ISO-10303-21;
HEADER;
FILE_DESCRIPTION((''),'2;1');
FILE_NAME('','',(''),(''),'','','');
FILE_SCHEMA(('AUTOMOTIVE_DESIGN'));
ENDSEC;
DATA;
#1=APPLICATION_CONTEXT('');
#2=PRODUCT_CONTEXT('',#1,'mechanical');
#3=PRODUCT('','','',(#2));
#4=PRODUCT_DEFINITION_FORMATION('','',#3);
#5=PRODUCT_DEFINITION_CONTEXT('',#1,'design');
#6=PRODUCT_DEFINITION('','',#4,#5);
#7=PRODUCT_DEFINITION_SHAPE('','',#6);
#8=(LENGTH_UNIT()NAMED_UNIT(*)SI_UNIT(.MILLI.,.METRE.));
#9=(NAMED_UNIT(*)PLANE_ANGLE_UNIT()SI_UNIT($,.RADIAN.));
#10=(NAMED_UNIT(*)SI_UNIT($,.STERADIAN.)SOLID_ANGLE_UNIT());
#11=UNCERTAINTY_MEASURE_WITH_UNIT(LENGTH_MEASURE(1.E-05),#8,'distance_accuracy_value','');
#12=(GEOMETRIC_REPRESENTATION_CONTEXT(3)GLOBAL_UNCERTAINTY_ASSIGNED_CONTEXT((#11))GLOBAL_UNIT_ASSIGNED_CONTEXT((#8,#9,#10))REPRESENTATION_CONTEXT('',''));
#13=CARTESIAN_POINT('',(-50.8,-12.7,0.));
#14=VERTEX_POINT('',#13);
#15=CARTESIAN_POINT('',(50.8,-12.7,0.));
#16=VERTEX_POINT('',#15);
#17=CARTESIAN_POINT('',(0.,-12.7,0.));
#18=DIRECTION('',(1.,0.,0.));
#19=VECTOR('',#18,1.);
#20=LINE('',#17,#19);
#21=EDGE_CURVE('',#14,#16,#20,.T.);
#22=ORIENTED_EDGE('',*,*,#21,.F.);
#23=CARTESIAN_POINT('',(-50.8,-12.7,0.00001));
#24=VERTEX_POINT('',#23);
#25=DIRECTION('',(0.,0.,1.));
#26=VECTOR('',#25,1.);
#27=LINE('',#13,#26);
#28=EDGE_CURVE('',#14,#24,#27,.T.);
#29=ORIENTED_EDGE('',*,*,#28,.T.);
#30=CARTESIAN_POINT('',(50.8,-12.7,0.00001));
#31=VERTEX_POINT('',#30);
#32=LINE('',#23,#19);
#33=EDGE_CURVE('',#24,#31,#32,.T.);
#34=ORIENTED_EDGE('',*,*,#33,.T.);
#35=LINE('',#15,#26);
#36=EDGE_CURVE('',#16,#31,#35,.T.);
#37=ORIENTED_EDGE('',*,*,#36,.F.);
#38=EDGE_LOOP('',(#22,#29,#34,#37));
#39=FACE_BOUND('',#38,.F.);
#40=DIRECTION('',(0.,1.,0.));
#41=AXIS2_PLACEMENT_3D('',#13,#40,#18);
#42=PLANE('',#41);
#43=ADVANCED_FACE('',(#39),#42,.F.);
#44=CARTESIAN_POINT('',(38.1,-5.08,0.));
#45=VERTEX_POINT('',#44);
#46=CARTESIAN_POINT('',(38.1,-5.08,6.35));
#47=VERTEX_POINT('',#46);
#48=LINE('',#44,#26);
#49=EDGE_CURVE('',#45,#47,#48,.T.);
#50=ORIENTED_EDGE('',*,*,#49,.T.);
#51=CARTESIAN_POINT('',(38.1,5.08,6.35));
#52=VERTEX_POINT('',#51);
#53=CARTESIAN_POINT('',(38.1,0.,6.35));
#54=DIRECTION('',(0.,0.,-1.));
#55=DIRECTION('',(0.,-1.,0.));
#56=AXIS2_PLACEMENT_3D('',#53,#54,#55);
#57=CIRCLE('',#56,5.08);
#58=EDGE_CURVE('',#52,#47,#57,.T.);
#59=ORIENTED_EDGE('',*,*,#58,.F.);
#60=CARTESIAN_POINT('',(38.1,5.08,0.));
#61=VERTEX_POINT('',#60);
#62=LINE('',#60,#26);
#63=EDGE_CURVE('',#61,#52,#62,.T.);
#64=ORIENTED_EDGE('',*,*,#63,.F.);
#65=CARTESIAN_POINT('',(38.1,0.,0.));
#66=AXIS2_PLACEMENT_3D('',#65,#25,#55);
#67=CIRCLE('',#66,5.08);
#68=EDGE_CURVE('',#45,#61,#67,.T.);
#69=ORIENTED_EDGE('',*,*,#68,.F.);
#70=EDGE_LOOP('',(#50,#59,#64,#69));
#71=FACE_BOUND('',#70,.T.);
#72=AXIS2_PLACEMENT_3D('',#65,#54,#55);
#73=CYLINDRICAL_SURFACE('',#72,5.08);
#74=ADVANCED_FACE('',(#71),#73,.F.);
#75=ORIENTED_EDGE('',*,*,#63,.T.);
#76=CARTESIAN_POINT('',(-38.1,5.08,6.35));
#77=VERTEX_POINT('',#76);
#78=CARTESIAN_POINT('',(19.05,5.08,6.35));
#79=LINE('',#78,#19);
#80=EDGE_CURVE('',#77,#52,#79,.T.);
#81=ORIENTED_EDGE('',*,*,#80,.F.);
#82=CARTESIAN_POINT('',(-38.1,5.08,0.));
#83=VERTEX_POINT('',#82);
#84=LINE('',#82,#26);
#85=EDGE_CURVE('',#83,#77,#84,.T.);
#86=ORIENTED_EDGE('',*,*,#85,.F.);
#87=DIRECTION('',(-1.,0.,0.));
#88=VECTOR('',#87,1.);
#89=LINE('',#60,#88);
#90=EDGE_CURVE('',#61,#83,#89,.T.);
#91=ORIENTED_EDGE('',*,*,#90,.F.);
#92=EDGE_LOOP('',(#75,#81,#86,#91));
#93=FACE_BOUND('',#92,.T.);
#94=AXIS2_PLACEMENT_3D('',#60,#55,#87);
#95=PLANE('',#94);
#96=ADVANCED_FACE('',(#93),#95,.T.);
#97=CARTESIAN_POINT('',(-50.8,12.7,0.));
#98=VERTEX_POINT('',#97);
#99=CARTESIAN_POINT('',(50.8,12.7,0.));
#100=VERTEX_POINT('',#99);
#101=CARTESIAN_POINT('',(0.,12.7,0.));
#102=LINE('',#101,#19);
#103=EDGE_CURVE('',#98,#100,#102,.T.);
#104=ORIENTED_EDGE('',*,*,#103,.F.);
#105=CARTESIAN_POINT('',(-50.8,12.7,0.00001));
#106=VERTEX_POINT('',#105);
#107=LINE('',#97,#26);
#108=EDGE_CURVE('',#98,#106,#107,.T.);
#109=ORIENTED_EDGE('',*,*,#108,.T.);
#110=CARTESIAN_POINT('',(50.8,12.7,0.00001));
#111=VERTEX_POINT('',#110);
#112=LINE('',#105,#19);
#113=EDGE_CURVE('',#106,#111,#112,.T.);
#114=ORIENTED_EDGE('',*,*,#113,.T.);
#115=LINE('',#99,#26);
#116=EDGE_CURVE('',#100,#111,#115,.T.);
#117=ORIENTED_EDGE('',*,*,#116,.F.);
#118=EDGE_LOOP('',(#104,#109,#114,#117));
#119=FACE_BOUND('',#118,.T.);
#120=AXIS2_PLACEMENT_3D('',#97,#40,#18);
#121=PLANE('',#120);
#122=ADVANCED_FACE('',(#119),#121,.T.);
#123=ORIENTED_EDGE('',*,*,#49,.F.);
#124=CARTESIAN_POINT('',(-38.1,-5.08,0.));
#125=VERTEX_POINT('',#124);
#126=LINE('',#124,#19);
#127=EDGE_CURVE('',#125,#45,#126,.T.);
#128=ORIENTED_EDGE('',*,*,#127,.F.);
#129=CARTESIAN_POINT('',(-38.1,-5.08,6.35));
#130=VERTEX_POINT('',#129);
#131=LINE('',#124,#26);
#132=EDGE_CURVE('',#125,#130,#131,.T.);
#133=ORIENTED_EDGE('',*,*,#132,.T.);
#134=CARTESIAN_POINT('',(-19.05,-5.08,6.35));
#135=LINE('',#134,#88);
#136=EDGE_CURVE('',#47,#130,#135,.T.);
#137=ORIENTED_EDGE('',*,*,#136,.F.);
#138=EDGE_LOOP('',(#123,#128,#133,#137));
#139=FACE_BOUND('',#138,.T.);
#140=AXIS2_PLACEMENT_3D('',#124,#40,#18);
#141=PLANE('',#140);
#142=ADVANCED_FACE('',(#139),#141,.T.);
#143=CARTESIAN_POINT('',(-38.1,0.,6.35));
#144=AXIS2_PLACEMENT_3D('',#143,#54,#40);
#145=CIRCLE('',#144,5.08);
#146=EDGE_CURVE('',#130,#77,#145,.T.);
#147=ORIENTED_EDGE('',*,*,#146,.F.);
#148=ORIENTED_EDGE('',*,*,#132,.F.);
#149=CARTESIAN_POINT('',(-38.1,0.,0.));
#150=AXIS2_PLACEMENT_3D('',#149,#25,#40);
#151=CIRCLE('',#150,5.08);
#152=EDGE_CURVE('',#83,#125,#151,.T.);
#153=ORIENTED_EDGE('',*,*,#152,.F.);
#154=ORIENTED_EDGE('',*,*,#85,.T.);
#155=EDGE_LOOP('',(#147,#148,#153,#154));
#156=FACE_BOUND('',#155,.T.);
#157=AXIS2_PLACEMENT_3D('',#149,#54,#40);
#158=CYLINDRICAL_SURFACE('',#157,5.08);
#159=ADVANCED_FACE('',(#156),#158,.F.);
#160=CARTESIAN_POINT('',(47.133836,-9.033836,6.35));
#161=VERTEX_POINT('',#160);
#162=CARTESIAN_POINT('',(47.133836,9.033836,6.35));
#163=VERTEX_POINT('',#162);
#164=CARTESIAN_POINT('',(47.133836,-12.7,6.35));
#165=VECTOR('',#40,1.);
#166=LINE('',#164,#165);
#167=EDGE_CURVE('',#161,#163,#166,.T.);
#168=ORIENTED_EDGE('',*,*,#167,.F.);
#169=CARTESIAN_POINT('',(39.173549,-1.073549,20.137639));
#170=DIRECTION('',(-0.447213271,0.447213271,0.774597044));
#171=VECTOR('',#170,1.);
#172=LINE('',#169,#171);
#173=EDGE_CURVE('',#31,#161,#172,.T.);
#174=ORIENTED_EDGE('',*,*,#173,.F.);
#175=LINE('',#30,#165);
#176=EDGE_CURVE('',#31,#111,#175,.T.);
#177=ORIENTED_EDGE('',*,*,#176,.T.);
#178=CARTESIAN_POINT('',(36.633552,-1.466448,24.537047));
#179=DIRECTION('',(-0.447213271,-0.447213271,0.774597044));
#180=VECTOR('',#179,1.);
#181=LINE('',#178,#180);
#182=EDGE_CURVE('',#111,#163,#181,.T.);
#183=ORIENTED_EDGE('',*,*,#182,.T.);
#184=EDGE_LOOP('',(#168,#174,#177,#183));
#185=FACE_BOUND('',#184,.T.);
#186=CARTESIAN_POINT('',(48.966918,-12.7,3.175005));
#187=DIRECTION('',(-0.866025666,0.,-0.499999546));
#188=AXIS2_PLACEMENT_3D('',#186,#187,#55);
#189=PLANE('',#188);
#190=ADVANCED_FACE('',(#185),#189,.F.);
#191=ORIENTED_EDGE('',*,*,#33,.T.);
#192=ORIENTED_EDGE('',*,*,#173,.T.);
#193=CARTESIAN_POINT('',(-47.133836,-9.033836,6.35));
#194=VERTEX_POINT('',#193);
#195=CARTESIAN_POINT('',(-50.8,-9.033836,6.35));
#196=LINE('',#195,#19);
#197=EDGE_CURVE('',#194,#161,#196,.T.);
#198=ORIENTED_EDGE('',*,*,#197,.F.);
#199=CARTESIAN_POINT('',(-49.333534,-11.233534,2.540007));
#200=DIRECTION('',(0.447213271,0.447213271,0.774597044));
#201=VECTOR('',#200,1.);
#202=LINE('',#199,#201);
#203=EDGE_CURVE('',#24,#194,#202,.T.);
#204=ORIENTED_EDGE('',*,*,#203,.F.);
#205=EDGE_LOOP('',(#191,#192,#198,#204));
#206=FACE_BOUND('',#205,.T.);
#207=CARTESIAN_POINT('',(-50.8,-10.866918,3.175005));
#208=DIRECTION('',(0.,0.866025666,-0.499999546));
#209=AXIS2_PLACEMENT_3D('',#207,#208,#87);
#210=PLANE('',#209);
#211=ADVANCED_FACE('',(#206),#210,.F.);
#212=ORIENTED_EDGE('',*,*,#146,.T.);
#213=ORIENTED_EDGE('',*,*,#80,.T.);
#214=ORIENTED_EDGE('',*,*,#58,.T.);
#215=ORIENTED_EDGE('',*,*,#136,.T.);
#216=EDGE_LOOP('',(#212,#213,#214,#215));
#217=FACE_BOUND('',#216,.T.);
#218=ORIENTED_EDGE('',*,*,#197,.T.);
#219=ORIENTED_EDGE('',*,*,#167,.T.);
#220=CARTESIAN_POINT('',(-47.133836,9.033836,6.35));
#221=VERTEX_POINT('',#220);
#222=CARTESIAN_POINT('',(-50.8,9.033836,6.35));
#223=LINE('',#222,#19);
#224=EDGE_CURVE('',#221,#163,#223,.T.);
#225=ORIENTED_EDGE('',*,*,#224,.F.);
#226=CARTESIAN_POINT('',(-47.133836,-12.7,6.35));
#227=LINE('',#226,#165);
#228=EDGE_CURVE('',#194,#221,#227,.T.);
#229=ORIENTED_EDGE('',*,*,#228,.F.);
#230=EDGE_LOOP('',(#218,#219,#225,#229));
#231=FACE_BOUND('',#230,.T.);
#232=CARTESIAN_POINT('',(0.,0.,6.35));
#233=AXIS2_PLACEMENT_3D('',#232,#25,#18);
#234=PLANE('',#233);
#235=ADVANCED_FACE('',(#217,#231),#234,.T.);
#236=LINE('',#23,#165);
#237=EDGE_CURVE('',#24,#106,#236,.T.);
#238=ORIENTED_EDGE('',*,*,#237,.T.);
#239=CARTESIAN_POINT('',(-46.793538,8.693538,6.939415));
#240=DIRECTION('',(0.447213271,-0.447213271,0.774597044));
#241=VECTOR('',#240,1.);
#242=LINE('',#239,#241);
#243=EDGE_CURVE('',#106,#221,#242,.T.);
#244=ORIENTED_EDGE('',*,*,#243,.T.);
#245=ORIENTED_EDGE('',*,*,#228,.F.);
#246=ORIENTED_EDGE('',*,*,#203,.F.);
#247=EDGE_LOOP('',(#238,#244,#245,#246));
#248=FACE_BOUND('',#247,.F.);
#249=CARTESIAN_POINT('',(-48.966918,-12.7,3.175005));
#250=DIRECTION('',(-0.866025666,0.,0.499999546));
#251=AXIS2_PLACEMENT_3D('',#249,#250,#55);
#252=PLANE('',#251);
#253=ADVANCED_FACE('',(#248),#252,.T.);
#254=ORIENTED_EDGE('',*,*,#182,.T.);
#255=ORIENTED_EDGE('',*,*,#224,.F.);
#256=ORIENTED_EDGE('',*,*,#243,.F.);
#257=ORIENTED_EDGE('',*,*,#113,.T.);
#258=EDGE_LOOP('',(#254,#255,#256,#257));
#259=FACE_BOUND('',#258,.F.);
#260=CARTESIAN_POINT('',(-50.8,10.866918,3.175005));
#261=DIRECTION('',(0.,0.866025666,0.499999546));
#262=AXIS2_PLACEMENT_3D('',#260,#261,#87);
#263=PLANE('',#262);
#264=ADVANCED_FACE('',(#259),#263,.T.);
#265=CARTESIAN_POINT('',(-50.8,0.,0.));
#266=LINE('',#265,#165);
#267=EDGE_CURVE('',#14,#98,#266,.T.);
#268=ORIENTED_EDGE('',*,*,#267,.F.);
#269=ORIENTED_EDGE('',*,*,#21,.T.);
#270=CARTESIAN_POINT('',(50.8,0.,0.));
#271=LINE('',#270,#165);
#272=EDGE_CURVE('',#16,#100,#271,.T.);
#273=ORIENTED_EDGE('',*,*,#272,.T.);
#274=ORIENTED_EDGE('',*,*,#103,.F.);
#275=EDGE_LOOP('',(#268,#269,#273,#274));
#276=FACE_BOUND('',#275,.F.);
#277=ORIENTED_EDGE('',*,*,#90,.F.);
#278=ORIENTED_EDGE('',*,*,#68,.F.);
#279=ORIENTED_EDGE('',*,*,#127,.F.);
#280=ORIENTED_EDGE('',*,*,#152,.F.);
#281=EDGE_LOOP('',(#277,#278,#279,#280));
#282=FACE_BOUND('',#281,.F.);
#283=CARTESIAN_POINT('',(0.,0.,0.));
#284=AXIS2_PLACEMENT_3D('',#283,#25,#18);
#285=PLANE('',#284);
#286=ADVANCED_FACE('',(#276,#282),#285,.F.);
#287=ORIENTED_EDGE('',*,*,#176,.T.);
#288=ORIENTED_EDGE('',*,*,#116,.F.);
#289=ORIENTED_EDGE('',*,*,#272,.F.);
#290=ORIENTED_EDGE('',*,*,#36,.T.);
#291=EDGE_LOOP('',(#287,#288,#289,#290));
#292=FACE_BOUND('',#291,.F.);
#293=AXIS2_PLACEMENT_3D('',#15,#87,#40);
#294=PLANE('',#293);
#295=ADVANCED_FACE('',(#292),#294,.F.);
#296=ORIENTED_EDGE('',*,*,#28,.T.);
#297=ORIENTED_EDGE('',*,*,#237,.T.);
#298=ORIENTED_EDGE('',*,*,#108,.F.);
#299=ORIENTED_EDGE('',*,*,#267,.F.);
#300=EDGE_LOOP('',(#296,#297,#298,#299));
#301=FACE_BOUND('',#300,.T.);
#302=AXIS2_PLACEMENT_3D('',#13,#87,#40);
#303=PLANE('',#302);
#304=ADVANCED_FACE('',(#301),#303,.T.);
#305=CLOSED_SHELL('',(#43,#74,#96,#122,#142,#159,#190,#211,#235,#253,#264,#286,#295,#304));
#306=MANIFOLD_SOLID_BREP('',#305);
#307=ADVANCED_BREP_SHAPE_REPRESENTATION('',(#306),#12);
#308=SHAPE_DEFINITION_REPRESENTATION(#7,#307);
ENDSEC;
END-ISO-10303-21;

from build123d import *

# Parameters (mm, degrees)
F0_W     = 101.6
F0_H     = 25.4
F1_DEPTH = 6.35
F2_SIZE2 = 3.666164
F2_SIZE  = 6.34999
F4_DEPTH = 42.2284360975


# Not quite as in the source:
# - a fillet or chamfer is up to 0.001 mm smaller than in the source, because OpenCascade refuses the exact size


with BuildPart() as f1:
    # F0 (on Top) → F1 (new body)
    with BuildSketch(Plane.XY):
        Rectangle(F0_W, F0_H)
    extrude(amount=F1_DEPTH)

    # F2 (size 6.35 and 3.6661742094 in the source; OpenCascade refuses exactly that, so slightly less here)
    f2_edges = [f1.edges().sort_by_distance(p)[0] for p in [
        (0, 12.7, 6.35),
        (-50.8, 0, 6.35),
        (0, -12.7, 6.35),
        (50.8, 0, 6.35),
    ]]
    chamfer(f2_edges, length=F2_SIZE, length2=F2_SIZE2)

    # F3 (on face) → F4 (cut)
    with BuildSketch(Plane.XY):
        with BuildLine():
            ThreePointArc((-38.1, 5.08), (-43.18, 0), (-38.1, -5.08))
            Line((-38.1, -5.08), (38.1, -5.08))
            ThreePointArc((38.1, -5.08), (43.18, 0), (38.1, 5.08))
            Line((38.1, 5.08), (-38.1, 5.08))
        make_face()
    extrude(amount=F4_DEPTH, mode=Mode.SUBTRACT)


solid = f1.part
